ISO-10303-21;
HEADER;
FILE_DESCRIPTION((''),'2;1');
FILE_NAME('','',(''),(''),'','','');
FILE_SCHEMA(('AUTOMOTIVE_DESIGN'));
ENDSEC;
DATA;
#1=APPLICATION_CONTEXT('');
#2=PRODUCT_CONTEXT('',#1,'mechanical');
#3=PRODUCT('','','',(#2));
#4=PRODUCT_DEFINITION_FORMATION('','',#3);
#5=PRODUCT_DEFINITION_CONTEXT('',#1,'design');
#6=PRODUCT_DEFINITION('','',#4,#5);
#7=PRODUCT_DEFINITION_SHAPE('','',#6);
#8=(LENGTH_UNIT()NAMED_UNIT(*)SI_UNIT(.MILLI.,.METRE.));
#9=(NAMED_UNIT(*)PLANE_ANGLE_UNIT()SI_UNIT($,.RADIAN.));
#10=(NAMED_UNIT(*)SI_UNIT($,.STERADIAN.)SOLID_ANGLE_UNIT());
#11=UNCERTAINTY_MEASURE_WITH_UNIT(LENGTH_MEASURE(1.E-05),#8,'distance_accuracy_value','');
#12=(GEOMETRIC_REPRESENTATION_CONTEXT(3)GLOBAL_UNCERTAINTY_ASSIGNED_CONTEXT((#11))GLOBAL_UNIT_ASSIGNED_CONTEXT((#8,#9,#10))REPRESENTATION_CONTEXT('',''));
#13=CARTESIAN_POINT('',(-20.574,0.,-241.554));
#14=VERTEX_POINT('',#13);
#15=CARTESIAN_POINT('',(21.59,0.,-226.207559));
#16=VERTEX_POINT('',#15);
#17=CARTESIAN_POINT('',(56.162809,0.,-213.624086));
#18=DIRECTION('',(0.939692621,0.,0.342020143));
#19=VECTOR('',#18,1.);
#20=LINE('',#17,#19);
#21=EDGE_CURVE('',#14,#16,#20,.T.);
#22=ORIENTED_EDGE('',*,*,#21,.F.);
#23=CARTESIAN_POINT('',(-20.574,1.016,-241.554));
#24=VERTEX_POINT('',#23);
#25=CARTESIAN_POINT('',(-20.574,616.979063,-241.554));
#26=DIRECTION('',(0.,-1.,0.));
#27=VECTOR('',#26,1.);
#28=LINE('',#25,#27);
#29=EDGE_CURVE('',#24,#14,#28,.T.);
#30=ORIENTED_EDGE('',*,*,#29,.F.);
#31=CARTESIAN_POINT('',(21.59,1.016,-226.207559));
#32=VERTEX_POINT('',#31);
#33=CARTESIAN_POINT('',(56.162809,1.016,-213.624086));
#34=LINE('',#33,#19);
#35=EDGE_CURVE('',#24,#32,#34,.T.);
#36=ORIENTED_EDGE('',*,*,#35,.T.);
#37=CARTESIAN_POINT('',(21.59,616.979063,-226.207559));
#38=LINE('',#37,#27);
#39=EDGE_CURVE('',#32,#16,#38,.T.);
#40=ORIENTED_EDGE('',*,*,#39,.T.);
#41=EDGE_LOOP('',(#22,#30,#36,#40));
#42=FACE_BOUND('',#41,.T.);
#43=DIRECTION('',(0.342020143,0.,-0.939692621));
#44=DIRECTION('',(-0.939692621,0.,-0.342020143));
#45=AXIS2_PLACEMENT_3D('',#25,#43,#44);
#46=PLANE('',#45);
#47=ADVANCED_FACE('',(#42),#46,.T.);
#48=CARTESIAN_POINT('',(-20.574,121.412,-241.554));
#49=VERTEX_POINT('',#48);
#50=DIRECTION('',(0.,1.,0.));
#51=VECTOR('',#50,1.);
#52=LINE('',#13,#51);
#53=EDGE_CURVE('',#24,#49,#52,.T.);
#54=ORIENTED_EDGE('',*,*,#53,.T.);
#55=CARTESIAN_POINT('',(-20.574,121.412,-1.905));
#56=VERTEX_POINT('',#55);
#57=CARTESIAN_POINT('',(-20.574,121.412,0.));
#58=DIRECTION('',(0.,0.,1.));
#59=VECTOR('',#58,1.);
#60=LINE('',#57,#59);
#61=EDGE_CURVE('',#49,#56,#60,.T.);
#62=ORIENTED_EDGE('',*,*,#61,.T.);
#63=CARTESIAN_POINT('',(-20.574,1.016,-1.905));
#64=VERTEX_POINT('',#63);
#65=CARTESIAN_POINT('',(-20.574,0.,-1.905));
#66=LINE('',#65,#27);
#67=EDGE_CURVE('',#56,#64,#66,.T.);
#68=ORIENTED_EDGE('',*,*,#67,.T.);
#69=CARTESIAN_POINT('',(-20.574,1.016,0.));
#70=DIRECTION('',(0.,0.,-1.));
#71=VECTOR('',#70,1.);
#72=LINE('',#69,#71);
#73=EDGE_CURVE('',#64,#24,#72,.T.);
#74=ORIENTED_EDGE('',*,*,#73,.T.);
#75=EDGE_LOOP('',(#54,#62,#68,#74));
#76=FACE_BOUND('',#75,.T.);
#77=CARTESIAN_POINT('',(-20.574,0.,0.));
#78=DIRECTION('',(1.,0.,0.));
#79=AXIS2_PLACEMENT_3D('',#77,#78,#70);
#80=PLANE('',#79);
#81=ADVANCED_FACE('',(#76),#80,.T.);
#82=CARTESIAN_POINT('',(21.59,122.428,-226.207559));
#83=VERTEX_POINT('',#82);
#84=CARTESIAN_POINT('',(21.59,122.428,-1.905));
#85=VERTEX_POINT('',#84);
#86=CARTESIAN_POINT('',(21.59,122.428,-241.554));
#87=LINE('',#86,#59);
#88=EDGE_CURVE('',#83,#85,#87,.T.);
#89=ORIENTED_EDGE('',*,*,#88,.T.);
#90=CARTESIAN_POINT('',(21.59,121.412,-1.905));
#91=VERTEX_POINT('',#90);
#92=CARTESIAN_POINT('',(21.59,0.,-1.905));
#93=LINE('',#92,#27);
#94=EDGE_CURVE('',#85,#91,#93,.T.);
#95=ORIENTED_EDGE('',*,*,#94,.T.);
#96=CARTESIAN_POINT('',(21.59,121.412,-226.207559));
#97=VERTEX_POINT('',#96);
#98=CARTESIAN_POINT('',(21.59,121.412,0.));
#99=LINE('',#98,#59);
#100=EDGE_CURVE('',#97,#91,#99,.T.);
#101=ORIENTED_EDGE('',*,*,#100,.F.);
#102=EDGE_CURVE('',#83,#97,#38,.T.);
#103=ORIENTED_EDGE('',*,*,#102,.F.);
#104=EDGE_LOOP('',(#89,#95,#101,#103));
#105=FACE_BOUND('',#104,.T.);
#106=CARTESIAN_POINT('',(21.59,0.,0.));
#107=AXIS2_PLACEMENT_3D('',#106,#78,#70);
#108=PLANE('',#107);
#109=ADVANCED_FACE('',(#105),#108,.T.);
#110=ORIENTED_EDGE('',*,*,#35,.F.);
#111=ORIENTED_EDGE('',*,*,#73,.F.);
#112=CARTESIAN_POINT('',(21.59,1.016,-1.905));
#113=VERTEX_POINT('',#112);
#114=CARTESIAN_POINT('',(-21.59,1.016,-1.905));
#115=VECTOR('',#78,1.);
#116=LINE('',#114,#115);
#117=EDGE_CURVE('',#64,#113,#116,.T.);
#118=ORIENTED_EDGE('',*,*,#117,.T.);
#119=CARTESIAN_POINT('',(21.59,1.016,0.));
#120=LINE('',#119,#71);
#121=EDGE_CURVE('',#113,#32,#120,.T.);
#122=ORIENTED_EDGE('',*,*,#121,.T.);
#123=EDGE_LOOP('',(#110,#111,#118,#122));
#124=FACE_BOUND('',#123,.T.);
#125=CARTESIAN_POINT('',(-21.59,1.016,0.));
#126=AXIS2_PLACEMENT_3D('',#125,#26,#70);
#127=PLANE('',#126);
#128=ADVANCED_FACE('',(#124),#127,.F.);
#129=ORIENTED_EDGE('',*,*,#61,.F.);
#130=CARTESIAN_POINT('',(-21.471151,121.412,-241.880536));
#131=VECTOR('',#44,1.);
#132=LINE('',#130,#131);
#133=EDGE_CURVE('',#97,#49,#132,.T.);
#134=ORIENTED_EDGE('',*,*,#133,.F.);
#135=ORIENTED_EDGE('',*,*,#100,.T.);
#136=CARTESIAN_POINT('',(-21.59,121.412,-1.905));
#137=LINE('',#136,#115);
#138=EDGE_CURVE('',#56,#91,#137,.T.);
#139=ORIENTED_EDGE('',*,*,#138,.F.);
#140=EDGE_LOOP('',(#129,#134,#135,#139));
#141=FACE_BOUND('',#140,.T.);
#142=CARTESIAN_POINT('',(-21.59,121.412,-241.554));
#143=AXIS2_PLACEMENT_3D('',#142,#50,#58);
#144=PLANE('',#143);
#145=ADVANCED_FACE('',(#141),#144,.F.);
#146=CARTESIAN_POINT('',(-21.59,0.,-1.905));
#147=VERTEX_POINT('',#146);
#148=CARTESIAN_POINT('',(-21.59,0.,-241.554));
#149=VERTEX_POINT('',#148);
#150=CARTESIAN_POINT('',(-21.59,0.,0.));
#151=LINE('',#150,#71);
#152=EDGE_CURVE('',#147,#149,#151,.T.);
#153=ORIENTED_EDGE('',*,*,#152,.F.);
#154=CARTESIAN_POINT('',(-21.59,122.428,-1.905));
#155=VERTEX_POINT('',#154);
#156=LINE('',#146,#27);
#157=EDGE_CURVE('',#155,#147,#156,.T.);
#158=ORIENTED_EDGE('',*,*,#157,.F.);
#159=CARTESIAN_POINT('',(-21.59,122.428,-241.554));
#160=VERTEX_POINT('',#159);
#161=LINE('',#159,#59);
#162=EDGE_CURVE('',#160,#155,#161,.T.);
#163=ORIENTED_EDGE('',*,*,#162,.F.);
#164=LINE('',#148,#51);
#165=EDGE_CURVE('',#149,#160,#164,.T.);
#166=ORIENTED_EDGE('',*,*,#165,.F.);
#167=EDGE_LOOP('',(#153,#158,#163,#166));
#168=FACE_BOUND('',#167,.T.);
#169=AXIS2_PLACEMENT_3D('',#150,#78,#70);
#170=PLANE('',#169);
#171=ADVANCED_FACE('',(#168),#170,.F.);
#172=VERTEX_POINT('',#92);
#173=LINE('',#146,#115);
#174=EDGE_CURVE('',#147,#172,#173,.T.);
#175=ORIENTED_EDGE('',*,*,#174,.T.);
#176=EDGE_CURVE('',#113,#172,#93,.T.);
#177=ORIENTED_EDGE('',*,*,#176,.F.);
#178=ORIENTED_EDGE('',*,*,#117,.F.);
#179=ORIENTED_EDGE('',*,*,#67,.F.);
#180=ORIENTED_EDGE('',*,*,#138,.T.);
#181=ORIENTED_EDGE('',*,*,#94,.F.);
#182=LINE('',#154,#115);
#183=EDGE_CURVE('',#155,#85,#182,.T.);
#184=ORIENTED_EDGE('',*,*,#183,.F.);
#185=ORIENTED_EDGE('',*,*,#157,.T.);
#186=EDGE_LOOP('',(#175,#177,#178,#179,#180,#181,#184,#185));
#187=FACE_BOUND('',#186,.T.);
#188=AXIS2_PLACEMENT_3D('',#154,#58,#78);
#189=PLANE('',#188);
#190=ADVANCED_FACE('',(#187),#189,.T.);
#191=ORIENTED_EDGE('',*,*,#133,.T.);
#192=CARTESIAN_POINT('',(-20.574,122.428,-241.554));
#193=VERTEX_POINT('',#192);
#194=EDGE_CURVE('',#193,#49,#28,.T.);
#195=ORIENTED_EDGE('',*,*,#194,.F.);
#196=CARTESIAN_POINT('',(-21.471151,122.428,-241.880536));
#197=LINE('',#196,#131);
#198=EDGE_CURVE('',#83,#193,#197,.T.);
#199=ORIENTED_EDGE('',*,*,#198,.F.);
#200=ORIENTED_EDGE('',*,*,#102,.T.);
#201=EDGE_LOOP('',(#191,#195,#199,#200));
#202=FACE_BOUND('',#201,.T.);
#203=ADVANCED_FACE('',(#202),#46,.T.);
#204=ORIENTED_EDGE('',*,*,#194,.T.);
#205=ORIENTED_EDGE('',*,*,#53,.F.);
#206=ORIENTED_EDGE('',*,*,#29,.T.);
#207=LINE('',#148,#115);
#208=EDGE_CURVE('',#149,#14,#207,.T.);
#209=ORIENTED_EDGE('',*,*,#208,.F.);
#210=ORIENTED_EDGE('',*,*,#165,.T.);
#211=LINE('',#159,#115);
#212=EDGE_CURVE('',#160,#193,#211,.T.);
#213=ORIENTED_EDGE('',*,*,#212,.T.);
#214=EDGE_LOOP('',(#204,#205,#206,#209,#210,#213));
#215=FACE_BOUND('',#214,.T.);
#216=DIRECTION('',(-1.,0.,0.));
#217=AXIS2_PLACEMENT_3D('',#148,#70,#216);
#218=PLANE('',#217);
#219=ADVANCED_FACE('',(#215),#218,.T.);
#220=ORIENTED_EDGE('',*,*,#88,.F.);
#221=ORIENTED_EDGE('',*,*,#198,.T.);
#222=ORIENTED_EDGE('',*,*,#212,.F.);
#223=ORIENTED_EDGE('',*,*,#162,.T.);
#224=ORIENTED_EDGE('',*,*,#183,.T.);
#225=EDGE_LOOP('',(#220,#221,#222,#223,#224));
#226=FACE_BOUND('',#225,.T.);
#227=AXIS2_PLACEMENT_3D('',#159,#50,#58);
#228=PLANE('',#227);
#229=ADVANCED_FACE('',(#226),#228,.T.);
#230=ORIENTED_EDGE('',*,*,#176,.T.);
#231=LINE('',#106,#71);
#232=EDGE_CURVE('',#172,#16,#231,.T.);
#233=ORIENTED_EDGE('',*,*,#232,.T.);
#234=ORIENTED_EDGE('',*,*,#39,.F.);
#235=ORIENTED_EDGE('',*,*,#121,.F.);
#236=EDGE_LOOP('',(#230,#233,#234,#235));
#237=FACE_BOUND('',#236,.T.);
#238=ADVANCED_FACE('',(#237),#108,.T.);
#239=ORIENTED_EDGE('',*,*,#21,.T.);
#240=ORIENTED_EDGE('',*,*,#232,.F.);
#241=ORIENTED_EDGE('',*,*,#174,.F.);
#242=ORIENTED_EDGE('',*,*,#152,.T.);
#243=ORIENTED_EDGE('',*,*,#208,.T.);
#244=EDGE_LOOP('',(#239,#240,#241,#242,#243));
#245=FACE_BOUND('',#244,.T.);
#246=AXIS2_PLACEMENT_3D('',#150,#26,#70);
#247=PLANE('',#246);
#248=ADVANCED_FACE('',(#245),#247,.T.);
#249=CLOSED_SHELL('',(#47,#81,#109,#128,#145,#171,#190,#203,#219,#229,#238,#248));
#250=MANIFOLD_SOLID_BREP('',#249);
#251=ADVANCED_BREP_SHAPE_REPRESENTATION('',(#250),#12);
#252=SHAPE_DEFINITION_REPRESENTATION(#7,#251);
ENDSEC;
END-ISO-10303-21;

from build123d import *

# Parameters (mm, degrees)
BOSS_EXTRUDE1_DEPTH      = 21.59
BOSS_EXTRUDE1_DEPTH_BACK = 21.59
SKETCH3_W                = 241.554
SKETCH3_H                = 122.428
SHELL2_T                 = -1.016
CUT_EXTRUDE2_DEPTH       = 272.66721959
CUT_EXTRUDE2_DEPTH_BACK  = 272.66721959
MOVE_START               = -1.905
MOVE_FACE1_DEPTH         = 1.905


# Read off the part's stored shape, not the designer's step: Move Face1
with BuildPart() as part:
    # Sketch3 → Boss-Extrude1 (new, two sides: drawn at the far end of the back side and taken through both)
    with BuildSketch(Plane(origin=(0, 0, 0), x_dir=(0, 0, -1), z_dir=(1, 0, 0)).offset(-BOSS_EXTRUDE1_DEPTH_BACK)):
        with Locations((120.777, 61.214)):
            Rectangle(SKETCH3_W, SKETCH3_H)
    extrude(amount=BOSS_EXTRUDE1_DEPTH + BOSS_EXTRUDE1_DEPTH_BACK)

    # Shell2
    shell2_openings = [part.faces().sort_by_distance(p)[0] for p in [
        (21.59, 61.214, -120.777),
        (0, 61.214, -241.554),
        (0, 61.214, 0),
    ]]
    offset(amount=SHELL2_T, openings=shell2_openings, kind=Kind.INTERSECTION)

    # Sketch8 → Cut-Extrude2 (cut, two sides: drawn at the far end of the back side and taken through both)
    with BuildSketch(Plane(origin=(0, 122.428, 0), x_dir=(1, 0, 0), z_dir=(0, 1, 0)).offset(-CUT_EXTRUDE2_DEPTH_BACK)):
        Polygon((-490.808059193, 412.705200685), (-20.574, 241.554), (21.59, 226.207559042), (491.824059193, 55.056358358), (834.126460562, 995.524476744), (-148.505657824, 1353.173319071), align=None)
    extrude(amount=CUT_EXTRUDE2_DEPTH + CUT_EXTRUDE2_DEPTH_BACK, mode=Mode.SUBTRACT)

    # Move Face1 outline → Move Face1 (cut)
    with BuildSketch(Plane.XY.offset(MOVE_START)):
        Polygon((-21.59, 0), (21.59, 0), (21.59, 1.016), (-20.574, 1.016), (-20.574, 121.412), (21.59, 121.412), (21.59, 122.428), (-21.59, 122.428), align=None)
    extrude(amount=MOVE_FACE1_DEPTH, mode=Mode.SUBTRACT)


solid = part.part
